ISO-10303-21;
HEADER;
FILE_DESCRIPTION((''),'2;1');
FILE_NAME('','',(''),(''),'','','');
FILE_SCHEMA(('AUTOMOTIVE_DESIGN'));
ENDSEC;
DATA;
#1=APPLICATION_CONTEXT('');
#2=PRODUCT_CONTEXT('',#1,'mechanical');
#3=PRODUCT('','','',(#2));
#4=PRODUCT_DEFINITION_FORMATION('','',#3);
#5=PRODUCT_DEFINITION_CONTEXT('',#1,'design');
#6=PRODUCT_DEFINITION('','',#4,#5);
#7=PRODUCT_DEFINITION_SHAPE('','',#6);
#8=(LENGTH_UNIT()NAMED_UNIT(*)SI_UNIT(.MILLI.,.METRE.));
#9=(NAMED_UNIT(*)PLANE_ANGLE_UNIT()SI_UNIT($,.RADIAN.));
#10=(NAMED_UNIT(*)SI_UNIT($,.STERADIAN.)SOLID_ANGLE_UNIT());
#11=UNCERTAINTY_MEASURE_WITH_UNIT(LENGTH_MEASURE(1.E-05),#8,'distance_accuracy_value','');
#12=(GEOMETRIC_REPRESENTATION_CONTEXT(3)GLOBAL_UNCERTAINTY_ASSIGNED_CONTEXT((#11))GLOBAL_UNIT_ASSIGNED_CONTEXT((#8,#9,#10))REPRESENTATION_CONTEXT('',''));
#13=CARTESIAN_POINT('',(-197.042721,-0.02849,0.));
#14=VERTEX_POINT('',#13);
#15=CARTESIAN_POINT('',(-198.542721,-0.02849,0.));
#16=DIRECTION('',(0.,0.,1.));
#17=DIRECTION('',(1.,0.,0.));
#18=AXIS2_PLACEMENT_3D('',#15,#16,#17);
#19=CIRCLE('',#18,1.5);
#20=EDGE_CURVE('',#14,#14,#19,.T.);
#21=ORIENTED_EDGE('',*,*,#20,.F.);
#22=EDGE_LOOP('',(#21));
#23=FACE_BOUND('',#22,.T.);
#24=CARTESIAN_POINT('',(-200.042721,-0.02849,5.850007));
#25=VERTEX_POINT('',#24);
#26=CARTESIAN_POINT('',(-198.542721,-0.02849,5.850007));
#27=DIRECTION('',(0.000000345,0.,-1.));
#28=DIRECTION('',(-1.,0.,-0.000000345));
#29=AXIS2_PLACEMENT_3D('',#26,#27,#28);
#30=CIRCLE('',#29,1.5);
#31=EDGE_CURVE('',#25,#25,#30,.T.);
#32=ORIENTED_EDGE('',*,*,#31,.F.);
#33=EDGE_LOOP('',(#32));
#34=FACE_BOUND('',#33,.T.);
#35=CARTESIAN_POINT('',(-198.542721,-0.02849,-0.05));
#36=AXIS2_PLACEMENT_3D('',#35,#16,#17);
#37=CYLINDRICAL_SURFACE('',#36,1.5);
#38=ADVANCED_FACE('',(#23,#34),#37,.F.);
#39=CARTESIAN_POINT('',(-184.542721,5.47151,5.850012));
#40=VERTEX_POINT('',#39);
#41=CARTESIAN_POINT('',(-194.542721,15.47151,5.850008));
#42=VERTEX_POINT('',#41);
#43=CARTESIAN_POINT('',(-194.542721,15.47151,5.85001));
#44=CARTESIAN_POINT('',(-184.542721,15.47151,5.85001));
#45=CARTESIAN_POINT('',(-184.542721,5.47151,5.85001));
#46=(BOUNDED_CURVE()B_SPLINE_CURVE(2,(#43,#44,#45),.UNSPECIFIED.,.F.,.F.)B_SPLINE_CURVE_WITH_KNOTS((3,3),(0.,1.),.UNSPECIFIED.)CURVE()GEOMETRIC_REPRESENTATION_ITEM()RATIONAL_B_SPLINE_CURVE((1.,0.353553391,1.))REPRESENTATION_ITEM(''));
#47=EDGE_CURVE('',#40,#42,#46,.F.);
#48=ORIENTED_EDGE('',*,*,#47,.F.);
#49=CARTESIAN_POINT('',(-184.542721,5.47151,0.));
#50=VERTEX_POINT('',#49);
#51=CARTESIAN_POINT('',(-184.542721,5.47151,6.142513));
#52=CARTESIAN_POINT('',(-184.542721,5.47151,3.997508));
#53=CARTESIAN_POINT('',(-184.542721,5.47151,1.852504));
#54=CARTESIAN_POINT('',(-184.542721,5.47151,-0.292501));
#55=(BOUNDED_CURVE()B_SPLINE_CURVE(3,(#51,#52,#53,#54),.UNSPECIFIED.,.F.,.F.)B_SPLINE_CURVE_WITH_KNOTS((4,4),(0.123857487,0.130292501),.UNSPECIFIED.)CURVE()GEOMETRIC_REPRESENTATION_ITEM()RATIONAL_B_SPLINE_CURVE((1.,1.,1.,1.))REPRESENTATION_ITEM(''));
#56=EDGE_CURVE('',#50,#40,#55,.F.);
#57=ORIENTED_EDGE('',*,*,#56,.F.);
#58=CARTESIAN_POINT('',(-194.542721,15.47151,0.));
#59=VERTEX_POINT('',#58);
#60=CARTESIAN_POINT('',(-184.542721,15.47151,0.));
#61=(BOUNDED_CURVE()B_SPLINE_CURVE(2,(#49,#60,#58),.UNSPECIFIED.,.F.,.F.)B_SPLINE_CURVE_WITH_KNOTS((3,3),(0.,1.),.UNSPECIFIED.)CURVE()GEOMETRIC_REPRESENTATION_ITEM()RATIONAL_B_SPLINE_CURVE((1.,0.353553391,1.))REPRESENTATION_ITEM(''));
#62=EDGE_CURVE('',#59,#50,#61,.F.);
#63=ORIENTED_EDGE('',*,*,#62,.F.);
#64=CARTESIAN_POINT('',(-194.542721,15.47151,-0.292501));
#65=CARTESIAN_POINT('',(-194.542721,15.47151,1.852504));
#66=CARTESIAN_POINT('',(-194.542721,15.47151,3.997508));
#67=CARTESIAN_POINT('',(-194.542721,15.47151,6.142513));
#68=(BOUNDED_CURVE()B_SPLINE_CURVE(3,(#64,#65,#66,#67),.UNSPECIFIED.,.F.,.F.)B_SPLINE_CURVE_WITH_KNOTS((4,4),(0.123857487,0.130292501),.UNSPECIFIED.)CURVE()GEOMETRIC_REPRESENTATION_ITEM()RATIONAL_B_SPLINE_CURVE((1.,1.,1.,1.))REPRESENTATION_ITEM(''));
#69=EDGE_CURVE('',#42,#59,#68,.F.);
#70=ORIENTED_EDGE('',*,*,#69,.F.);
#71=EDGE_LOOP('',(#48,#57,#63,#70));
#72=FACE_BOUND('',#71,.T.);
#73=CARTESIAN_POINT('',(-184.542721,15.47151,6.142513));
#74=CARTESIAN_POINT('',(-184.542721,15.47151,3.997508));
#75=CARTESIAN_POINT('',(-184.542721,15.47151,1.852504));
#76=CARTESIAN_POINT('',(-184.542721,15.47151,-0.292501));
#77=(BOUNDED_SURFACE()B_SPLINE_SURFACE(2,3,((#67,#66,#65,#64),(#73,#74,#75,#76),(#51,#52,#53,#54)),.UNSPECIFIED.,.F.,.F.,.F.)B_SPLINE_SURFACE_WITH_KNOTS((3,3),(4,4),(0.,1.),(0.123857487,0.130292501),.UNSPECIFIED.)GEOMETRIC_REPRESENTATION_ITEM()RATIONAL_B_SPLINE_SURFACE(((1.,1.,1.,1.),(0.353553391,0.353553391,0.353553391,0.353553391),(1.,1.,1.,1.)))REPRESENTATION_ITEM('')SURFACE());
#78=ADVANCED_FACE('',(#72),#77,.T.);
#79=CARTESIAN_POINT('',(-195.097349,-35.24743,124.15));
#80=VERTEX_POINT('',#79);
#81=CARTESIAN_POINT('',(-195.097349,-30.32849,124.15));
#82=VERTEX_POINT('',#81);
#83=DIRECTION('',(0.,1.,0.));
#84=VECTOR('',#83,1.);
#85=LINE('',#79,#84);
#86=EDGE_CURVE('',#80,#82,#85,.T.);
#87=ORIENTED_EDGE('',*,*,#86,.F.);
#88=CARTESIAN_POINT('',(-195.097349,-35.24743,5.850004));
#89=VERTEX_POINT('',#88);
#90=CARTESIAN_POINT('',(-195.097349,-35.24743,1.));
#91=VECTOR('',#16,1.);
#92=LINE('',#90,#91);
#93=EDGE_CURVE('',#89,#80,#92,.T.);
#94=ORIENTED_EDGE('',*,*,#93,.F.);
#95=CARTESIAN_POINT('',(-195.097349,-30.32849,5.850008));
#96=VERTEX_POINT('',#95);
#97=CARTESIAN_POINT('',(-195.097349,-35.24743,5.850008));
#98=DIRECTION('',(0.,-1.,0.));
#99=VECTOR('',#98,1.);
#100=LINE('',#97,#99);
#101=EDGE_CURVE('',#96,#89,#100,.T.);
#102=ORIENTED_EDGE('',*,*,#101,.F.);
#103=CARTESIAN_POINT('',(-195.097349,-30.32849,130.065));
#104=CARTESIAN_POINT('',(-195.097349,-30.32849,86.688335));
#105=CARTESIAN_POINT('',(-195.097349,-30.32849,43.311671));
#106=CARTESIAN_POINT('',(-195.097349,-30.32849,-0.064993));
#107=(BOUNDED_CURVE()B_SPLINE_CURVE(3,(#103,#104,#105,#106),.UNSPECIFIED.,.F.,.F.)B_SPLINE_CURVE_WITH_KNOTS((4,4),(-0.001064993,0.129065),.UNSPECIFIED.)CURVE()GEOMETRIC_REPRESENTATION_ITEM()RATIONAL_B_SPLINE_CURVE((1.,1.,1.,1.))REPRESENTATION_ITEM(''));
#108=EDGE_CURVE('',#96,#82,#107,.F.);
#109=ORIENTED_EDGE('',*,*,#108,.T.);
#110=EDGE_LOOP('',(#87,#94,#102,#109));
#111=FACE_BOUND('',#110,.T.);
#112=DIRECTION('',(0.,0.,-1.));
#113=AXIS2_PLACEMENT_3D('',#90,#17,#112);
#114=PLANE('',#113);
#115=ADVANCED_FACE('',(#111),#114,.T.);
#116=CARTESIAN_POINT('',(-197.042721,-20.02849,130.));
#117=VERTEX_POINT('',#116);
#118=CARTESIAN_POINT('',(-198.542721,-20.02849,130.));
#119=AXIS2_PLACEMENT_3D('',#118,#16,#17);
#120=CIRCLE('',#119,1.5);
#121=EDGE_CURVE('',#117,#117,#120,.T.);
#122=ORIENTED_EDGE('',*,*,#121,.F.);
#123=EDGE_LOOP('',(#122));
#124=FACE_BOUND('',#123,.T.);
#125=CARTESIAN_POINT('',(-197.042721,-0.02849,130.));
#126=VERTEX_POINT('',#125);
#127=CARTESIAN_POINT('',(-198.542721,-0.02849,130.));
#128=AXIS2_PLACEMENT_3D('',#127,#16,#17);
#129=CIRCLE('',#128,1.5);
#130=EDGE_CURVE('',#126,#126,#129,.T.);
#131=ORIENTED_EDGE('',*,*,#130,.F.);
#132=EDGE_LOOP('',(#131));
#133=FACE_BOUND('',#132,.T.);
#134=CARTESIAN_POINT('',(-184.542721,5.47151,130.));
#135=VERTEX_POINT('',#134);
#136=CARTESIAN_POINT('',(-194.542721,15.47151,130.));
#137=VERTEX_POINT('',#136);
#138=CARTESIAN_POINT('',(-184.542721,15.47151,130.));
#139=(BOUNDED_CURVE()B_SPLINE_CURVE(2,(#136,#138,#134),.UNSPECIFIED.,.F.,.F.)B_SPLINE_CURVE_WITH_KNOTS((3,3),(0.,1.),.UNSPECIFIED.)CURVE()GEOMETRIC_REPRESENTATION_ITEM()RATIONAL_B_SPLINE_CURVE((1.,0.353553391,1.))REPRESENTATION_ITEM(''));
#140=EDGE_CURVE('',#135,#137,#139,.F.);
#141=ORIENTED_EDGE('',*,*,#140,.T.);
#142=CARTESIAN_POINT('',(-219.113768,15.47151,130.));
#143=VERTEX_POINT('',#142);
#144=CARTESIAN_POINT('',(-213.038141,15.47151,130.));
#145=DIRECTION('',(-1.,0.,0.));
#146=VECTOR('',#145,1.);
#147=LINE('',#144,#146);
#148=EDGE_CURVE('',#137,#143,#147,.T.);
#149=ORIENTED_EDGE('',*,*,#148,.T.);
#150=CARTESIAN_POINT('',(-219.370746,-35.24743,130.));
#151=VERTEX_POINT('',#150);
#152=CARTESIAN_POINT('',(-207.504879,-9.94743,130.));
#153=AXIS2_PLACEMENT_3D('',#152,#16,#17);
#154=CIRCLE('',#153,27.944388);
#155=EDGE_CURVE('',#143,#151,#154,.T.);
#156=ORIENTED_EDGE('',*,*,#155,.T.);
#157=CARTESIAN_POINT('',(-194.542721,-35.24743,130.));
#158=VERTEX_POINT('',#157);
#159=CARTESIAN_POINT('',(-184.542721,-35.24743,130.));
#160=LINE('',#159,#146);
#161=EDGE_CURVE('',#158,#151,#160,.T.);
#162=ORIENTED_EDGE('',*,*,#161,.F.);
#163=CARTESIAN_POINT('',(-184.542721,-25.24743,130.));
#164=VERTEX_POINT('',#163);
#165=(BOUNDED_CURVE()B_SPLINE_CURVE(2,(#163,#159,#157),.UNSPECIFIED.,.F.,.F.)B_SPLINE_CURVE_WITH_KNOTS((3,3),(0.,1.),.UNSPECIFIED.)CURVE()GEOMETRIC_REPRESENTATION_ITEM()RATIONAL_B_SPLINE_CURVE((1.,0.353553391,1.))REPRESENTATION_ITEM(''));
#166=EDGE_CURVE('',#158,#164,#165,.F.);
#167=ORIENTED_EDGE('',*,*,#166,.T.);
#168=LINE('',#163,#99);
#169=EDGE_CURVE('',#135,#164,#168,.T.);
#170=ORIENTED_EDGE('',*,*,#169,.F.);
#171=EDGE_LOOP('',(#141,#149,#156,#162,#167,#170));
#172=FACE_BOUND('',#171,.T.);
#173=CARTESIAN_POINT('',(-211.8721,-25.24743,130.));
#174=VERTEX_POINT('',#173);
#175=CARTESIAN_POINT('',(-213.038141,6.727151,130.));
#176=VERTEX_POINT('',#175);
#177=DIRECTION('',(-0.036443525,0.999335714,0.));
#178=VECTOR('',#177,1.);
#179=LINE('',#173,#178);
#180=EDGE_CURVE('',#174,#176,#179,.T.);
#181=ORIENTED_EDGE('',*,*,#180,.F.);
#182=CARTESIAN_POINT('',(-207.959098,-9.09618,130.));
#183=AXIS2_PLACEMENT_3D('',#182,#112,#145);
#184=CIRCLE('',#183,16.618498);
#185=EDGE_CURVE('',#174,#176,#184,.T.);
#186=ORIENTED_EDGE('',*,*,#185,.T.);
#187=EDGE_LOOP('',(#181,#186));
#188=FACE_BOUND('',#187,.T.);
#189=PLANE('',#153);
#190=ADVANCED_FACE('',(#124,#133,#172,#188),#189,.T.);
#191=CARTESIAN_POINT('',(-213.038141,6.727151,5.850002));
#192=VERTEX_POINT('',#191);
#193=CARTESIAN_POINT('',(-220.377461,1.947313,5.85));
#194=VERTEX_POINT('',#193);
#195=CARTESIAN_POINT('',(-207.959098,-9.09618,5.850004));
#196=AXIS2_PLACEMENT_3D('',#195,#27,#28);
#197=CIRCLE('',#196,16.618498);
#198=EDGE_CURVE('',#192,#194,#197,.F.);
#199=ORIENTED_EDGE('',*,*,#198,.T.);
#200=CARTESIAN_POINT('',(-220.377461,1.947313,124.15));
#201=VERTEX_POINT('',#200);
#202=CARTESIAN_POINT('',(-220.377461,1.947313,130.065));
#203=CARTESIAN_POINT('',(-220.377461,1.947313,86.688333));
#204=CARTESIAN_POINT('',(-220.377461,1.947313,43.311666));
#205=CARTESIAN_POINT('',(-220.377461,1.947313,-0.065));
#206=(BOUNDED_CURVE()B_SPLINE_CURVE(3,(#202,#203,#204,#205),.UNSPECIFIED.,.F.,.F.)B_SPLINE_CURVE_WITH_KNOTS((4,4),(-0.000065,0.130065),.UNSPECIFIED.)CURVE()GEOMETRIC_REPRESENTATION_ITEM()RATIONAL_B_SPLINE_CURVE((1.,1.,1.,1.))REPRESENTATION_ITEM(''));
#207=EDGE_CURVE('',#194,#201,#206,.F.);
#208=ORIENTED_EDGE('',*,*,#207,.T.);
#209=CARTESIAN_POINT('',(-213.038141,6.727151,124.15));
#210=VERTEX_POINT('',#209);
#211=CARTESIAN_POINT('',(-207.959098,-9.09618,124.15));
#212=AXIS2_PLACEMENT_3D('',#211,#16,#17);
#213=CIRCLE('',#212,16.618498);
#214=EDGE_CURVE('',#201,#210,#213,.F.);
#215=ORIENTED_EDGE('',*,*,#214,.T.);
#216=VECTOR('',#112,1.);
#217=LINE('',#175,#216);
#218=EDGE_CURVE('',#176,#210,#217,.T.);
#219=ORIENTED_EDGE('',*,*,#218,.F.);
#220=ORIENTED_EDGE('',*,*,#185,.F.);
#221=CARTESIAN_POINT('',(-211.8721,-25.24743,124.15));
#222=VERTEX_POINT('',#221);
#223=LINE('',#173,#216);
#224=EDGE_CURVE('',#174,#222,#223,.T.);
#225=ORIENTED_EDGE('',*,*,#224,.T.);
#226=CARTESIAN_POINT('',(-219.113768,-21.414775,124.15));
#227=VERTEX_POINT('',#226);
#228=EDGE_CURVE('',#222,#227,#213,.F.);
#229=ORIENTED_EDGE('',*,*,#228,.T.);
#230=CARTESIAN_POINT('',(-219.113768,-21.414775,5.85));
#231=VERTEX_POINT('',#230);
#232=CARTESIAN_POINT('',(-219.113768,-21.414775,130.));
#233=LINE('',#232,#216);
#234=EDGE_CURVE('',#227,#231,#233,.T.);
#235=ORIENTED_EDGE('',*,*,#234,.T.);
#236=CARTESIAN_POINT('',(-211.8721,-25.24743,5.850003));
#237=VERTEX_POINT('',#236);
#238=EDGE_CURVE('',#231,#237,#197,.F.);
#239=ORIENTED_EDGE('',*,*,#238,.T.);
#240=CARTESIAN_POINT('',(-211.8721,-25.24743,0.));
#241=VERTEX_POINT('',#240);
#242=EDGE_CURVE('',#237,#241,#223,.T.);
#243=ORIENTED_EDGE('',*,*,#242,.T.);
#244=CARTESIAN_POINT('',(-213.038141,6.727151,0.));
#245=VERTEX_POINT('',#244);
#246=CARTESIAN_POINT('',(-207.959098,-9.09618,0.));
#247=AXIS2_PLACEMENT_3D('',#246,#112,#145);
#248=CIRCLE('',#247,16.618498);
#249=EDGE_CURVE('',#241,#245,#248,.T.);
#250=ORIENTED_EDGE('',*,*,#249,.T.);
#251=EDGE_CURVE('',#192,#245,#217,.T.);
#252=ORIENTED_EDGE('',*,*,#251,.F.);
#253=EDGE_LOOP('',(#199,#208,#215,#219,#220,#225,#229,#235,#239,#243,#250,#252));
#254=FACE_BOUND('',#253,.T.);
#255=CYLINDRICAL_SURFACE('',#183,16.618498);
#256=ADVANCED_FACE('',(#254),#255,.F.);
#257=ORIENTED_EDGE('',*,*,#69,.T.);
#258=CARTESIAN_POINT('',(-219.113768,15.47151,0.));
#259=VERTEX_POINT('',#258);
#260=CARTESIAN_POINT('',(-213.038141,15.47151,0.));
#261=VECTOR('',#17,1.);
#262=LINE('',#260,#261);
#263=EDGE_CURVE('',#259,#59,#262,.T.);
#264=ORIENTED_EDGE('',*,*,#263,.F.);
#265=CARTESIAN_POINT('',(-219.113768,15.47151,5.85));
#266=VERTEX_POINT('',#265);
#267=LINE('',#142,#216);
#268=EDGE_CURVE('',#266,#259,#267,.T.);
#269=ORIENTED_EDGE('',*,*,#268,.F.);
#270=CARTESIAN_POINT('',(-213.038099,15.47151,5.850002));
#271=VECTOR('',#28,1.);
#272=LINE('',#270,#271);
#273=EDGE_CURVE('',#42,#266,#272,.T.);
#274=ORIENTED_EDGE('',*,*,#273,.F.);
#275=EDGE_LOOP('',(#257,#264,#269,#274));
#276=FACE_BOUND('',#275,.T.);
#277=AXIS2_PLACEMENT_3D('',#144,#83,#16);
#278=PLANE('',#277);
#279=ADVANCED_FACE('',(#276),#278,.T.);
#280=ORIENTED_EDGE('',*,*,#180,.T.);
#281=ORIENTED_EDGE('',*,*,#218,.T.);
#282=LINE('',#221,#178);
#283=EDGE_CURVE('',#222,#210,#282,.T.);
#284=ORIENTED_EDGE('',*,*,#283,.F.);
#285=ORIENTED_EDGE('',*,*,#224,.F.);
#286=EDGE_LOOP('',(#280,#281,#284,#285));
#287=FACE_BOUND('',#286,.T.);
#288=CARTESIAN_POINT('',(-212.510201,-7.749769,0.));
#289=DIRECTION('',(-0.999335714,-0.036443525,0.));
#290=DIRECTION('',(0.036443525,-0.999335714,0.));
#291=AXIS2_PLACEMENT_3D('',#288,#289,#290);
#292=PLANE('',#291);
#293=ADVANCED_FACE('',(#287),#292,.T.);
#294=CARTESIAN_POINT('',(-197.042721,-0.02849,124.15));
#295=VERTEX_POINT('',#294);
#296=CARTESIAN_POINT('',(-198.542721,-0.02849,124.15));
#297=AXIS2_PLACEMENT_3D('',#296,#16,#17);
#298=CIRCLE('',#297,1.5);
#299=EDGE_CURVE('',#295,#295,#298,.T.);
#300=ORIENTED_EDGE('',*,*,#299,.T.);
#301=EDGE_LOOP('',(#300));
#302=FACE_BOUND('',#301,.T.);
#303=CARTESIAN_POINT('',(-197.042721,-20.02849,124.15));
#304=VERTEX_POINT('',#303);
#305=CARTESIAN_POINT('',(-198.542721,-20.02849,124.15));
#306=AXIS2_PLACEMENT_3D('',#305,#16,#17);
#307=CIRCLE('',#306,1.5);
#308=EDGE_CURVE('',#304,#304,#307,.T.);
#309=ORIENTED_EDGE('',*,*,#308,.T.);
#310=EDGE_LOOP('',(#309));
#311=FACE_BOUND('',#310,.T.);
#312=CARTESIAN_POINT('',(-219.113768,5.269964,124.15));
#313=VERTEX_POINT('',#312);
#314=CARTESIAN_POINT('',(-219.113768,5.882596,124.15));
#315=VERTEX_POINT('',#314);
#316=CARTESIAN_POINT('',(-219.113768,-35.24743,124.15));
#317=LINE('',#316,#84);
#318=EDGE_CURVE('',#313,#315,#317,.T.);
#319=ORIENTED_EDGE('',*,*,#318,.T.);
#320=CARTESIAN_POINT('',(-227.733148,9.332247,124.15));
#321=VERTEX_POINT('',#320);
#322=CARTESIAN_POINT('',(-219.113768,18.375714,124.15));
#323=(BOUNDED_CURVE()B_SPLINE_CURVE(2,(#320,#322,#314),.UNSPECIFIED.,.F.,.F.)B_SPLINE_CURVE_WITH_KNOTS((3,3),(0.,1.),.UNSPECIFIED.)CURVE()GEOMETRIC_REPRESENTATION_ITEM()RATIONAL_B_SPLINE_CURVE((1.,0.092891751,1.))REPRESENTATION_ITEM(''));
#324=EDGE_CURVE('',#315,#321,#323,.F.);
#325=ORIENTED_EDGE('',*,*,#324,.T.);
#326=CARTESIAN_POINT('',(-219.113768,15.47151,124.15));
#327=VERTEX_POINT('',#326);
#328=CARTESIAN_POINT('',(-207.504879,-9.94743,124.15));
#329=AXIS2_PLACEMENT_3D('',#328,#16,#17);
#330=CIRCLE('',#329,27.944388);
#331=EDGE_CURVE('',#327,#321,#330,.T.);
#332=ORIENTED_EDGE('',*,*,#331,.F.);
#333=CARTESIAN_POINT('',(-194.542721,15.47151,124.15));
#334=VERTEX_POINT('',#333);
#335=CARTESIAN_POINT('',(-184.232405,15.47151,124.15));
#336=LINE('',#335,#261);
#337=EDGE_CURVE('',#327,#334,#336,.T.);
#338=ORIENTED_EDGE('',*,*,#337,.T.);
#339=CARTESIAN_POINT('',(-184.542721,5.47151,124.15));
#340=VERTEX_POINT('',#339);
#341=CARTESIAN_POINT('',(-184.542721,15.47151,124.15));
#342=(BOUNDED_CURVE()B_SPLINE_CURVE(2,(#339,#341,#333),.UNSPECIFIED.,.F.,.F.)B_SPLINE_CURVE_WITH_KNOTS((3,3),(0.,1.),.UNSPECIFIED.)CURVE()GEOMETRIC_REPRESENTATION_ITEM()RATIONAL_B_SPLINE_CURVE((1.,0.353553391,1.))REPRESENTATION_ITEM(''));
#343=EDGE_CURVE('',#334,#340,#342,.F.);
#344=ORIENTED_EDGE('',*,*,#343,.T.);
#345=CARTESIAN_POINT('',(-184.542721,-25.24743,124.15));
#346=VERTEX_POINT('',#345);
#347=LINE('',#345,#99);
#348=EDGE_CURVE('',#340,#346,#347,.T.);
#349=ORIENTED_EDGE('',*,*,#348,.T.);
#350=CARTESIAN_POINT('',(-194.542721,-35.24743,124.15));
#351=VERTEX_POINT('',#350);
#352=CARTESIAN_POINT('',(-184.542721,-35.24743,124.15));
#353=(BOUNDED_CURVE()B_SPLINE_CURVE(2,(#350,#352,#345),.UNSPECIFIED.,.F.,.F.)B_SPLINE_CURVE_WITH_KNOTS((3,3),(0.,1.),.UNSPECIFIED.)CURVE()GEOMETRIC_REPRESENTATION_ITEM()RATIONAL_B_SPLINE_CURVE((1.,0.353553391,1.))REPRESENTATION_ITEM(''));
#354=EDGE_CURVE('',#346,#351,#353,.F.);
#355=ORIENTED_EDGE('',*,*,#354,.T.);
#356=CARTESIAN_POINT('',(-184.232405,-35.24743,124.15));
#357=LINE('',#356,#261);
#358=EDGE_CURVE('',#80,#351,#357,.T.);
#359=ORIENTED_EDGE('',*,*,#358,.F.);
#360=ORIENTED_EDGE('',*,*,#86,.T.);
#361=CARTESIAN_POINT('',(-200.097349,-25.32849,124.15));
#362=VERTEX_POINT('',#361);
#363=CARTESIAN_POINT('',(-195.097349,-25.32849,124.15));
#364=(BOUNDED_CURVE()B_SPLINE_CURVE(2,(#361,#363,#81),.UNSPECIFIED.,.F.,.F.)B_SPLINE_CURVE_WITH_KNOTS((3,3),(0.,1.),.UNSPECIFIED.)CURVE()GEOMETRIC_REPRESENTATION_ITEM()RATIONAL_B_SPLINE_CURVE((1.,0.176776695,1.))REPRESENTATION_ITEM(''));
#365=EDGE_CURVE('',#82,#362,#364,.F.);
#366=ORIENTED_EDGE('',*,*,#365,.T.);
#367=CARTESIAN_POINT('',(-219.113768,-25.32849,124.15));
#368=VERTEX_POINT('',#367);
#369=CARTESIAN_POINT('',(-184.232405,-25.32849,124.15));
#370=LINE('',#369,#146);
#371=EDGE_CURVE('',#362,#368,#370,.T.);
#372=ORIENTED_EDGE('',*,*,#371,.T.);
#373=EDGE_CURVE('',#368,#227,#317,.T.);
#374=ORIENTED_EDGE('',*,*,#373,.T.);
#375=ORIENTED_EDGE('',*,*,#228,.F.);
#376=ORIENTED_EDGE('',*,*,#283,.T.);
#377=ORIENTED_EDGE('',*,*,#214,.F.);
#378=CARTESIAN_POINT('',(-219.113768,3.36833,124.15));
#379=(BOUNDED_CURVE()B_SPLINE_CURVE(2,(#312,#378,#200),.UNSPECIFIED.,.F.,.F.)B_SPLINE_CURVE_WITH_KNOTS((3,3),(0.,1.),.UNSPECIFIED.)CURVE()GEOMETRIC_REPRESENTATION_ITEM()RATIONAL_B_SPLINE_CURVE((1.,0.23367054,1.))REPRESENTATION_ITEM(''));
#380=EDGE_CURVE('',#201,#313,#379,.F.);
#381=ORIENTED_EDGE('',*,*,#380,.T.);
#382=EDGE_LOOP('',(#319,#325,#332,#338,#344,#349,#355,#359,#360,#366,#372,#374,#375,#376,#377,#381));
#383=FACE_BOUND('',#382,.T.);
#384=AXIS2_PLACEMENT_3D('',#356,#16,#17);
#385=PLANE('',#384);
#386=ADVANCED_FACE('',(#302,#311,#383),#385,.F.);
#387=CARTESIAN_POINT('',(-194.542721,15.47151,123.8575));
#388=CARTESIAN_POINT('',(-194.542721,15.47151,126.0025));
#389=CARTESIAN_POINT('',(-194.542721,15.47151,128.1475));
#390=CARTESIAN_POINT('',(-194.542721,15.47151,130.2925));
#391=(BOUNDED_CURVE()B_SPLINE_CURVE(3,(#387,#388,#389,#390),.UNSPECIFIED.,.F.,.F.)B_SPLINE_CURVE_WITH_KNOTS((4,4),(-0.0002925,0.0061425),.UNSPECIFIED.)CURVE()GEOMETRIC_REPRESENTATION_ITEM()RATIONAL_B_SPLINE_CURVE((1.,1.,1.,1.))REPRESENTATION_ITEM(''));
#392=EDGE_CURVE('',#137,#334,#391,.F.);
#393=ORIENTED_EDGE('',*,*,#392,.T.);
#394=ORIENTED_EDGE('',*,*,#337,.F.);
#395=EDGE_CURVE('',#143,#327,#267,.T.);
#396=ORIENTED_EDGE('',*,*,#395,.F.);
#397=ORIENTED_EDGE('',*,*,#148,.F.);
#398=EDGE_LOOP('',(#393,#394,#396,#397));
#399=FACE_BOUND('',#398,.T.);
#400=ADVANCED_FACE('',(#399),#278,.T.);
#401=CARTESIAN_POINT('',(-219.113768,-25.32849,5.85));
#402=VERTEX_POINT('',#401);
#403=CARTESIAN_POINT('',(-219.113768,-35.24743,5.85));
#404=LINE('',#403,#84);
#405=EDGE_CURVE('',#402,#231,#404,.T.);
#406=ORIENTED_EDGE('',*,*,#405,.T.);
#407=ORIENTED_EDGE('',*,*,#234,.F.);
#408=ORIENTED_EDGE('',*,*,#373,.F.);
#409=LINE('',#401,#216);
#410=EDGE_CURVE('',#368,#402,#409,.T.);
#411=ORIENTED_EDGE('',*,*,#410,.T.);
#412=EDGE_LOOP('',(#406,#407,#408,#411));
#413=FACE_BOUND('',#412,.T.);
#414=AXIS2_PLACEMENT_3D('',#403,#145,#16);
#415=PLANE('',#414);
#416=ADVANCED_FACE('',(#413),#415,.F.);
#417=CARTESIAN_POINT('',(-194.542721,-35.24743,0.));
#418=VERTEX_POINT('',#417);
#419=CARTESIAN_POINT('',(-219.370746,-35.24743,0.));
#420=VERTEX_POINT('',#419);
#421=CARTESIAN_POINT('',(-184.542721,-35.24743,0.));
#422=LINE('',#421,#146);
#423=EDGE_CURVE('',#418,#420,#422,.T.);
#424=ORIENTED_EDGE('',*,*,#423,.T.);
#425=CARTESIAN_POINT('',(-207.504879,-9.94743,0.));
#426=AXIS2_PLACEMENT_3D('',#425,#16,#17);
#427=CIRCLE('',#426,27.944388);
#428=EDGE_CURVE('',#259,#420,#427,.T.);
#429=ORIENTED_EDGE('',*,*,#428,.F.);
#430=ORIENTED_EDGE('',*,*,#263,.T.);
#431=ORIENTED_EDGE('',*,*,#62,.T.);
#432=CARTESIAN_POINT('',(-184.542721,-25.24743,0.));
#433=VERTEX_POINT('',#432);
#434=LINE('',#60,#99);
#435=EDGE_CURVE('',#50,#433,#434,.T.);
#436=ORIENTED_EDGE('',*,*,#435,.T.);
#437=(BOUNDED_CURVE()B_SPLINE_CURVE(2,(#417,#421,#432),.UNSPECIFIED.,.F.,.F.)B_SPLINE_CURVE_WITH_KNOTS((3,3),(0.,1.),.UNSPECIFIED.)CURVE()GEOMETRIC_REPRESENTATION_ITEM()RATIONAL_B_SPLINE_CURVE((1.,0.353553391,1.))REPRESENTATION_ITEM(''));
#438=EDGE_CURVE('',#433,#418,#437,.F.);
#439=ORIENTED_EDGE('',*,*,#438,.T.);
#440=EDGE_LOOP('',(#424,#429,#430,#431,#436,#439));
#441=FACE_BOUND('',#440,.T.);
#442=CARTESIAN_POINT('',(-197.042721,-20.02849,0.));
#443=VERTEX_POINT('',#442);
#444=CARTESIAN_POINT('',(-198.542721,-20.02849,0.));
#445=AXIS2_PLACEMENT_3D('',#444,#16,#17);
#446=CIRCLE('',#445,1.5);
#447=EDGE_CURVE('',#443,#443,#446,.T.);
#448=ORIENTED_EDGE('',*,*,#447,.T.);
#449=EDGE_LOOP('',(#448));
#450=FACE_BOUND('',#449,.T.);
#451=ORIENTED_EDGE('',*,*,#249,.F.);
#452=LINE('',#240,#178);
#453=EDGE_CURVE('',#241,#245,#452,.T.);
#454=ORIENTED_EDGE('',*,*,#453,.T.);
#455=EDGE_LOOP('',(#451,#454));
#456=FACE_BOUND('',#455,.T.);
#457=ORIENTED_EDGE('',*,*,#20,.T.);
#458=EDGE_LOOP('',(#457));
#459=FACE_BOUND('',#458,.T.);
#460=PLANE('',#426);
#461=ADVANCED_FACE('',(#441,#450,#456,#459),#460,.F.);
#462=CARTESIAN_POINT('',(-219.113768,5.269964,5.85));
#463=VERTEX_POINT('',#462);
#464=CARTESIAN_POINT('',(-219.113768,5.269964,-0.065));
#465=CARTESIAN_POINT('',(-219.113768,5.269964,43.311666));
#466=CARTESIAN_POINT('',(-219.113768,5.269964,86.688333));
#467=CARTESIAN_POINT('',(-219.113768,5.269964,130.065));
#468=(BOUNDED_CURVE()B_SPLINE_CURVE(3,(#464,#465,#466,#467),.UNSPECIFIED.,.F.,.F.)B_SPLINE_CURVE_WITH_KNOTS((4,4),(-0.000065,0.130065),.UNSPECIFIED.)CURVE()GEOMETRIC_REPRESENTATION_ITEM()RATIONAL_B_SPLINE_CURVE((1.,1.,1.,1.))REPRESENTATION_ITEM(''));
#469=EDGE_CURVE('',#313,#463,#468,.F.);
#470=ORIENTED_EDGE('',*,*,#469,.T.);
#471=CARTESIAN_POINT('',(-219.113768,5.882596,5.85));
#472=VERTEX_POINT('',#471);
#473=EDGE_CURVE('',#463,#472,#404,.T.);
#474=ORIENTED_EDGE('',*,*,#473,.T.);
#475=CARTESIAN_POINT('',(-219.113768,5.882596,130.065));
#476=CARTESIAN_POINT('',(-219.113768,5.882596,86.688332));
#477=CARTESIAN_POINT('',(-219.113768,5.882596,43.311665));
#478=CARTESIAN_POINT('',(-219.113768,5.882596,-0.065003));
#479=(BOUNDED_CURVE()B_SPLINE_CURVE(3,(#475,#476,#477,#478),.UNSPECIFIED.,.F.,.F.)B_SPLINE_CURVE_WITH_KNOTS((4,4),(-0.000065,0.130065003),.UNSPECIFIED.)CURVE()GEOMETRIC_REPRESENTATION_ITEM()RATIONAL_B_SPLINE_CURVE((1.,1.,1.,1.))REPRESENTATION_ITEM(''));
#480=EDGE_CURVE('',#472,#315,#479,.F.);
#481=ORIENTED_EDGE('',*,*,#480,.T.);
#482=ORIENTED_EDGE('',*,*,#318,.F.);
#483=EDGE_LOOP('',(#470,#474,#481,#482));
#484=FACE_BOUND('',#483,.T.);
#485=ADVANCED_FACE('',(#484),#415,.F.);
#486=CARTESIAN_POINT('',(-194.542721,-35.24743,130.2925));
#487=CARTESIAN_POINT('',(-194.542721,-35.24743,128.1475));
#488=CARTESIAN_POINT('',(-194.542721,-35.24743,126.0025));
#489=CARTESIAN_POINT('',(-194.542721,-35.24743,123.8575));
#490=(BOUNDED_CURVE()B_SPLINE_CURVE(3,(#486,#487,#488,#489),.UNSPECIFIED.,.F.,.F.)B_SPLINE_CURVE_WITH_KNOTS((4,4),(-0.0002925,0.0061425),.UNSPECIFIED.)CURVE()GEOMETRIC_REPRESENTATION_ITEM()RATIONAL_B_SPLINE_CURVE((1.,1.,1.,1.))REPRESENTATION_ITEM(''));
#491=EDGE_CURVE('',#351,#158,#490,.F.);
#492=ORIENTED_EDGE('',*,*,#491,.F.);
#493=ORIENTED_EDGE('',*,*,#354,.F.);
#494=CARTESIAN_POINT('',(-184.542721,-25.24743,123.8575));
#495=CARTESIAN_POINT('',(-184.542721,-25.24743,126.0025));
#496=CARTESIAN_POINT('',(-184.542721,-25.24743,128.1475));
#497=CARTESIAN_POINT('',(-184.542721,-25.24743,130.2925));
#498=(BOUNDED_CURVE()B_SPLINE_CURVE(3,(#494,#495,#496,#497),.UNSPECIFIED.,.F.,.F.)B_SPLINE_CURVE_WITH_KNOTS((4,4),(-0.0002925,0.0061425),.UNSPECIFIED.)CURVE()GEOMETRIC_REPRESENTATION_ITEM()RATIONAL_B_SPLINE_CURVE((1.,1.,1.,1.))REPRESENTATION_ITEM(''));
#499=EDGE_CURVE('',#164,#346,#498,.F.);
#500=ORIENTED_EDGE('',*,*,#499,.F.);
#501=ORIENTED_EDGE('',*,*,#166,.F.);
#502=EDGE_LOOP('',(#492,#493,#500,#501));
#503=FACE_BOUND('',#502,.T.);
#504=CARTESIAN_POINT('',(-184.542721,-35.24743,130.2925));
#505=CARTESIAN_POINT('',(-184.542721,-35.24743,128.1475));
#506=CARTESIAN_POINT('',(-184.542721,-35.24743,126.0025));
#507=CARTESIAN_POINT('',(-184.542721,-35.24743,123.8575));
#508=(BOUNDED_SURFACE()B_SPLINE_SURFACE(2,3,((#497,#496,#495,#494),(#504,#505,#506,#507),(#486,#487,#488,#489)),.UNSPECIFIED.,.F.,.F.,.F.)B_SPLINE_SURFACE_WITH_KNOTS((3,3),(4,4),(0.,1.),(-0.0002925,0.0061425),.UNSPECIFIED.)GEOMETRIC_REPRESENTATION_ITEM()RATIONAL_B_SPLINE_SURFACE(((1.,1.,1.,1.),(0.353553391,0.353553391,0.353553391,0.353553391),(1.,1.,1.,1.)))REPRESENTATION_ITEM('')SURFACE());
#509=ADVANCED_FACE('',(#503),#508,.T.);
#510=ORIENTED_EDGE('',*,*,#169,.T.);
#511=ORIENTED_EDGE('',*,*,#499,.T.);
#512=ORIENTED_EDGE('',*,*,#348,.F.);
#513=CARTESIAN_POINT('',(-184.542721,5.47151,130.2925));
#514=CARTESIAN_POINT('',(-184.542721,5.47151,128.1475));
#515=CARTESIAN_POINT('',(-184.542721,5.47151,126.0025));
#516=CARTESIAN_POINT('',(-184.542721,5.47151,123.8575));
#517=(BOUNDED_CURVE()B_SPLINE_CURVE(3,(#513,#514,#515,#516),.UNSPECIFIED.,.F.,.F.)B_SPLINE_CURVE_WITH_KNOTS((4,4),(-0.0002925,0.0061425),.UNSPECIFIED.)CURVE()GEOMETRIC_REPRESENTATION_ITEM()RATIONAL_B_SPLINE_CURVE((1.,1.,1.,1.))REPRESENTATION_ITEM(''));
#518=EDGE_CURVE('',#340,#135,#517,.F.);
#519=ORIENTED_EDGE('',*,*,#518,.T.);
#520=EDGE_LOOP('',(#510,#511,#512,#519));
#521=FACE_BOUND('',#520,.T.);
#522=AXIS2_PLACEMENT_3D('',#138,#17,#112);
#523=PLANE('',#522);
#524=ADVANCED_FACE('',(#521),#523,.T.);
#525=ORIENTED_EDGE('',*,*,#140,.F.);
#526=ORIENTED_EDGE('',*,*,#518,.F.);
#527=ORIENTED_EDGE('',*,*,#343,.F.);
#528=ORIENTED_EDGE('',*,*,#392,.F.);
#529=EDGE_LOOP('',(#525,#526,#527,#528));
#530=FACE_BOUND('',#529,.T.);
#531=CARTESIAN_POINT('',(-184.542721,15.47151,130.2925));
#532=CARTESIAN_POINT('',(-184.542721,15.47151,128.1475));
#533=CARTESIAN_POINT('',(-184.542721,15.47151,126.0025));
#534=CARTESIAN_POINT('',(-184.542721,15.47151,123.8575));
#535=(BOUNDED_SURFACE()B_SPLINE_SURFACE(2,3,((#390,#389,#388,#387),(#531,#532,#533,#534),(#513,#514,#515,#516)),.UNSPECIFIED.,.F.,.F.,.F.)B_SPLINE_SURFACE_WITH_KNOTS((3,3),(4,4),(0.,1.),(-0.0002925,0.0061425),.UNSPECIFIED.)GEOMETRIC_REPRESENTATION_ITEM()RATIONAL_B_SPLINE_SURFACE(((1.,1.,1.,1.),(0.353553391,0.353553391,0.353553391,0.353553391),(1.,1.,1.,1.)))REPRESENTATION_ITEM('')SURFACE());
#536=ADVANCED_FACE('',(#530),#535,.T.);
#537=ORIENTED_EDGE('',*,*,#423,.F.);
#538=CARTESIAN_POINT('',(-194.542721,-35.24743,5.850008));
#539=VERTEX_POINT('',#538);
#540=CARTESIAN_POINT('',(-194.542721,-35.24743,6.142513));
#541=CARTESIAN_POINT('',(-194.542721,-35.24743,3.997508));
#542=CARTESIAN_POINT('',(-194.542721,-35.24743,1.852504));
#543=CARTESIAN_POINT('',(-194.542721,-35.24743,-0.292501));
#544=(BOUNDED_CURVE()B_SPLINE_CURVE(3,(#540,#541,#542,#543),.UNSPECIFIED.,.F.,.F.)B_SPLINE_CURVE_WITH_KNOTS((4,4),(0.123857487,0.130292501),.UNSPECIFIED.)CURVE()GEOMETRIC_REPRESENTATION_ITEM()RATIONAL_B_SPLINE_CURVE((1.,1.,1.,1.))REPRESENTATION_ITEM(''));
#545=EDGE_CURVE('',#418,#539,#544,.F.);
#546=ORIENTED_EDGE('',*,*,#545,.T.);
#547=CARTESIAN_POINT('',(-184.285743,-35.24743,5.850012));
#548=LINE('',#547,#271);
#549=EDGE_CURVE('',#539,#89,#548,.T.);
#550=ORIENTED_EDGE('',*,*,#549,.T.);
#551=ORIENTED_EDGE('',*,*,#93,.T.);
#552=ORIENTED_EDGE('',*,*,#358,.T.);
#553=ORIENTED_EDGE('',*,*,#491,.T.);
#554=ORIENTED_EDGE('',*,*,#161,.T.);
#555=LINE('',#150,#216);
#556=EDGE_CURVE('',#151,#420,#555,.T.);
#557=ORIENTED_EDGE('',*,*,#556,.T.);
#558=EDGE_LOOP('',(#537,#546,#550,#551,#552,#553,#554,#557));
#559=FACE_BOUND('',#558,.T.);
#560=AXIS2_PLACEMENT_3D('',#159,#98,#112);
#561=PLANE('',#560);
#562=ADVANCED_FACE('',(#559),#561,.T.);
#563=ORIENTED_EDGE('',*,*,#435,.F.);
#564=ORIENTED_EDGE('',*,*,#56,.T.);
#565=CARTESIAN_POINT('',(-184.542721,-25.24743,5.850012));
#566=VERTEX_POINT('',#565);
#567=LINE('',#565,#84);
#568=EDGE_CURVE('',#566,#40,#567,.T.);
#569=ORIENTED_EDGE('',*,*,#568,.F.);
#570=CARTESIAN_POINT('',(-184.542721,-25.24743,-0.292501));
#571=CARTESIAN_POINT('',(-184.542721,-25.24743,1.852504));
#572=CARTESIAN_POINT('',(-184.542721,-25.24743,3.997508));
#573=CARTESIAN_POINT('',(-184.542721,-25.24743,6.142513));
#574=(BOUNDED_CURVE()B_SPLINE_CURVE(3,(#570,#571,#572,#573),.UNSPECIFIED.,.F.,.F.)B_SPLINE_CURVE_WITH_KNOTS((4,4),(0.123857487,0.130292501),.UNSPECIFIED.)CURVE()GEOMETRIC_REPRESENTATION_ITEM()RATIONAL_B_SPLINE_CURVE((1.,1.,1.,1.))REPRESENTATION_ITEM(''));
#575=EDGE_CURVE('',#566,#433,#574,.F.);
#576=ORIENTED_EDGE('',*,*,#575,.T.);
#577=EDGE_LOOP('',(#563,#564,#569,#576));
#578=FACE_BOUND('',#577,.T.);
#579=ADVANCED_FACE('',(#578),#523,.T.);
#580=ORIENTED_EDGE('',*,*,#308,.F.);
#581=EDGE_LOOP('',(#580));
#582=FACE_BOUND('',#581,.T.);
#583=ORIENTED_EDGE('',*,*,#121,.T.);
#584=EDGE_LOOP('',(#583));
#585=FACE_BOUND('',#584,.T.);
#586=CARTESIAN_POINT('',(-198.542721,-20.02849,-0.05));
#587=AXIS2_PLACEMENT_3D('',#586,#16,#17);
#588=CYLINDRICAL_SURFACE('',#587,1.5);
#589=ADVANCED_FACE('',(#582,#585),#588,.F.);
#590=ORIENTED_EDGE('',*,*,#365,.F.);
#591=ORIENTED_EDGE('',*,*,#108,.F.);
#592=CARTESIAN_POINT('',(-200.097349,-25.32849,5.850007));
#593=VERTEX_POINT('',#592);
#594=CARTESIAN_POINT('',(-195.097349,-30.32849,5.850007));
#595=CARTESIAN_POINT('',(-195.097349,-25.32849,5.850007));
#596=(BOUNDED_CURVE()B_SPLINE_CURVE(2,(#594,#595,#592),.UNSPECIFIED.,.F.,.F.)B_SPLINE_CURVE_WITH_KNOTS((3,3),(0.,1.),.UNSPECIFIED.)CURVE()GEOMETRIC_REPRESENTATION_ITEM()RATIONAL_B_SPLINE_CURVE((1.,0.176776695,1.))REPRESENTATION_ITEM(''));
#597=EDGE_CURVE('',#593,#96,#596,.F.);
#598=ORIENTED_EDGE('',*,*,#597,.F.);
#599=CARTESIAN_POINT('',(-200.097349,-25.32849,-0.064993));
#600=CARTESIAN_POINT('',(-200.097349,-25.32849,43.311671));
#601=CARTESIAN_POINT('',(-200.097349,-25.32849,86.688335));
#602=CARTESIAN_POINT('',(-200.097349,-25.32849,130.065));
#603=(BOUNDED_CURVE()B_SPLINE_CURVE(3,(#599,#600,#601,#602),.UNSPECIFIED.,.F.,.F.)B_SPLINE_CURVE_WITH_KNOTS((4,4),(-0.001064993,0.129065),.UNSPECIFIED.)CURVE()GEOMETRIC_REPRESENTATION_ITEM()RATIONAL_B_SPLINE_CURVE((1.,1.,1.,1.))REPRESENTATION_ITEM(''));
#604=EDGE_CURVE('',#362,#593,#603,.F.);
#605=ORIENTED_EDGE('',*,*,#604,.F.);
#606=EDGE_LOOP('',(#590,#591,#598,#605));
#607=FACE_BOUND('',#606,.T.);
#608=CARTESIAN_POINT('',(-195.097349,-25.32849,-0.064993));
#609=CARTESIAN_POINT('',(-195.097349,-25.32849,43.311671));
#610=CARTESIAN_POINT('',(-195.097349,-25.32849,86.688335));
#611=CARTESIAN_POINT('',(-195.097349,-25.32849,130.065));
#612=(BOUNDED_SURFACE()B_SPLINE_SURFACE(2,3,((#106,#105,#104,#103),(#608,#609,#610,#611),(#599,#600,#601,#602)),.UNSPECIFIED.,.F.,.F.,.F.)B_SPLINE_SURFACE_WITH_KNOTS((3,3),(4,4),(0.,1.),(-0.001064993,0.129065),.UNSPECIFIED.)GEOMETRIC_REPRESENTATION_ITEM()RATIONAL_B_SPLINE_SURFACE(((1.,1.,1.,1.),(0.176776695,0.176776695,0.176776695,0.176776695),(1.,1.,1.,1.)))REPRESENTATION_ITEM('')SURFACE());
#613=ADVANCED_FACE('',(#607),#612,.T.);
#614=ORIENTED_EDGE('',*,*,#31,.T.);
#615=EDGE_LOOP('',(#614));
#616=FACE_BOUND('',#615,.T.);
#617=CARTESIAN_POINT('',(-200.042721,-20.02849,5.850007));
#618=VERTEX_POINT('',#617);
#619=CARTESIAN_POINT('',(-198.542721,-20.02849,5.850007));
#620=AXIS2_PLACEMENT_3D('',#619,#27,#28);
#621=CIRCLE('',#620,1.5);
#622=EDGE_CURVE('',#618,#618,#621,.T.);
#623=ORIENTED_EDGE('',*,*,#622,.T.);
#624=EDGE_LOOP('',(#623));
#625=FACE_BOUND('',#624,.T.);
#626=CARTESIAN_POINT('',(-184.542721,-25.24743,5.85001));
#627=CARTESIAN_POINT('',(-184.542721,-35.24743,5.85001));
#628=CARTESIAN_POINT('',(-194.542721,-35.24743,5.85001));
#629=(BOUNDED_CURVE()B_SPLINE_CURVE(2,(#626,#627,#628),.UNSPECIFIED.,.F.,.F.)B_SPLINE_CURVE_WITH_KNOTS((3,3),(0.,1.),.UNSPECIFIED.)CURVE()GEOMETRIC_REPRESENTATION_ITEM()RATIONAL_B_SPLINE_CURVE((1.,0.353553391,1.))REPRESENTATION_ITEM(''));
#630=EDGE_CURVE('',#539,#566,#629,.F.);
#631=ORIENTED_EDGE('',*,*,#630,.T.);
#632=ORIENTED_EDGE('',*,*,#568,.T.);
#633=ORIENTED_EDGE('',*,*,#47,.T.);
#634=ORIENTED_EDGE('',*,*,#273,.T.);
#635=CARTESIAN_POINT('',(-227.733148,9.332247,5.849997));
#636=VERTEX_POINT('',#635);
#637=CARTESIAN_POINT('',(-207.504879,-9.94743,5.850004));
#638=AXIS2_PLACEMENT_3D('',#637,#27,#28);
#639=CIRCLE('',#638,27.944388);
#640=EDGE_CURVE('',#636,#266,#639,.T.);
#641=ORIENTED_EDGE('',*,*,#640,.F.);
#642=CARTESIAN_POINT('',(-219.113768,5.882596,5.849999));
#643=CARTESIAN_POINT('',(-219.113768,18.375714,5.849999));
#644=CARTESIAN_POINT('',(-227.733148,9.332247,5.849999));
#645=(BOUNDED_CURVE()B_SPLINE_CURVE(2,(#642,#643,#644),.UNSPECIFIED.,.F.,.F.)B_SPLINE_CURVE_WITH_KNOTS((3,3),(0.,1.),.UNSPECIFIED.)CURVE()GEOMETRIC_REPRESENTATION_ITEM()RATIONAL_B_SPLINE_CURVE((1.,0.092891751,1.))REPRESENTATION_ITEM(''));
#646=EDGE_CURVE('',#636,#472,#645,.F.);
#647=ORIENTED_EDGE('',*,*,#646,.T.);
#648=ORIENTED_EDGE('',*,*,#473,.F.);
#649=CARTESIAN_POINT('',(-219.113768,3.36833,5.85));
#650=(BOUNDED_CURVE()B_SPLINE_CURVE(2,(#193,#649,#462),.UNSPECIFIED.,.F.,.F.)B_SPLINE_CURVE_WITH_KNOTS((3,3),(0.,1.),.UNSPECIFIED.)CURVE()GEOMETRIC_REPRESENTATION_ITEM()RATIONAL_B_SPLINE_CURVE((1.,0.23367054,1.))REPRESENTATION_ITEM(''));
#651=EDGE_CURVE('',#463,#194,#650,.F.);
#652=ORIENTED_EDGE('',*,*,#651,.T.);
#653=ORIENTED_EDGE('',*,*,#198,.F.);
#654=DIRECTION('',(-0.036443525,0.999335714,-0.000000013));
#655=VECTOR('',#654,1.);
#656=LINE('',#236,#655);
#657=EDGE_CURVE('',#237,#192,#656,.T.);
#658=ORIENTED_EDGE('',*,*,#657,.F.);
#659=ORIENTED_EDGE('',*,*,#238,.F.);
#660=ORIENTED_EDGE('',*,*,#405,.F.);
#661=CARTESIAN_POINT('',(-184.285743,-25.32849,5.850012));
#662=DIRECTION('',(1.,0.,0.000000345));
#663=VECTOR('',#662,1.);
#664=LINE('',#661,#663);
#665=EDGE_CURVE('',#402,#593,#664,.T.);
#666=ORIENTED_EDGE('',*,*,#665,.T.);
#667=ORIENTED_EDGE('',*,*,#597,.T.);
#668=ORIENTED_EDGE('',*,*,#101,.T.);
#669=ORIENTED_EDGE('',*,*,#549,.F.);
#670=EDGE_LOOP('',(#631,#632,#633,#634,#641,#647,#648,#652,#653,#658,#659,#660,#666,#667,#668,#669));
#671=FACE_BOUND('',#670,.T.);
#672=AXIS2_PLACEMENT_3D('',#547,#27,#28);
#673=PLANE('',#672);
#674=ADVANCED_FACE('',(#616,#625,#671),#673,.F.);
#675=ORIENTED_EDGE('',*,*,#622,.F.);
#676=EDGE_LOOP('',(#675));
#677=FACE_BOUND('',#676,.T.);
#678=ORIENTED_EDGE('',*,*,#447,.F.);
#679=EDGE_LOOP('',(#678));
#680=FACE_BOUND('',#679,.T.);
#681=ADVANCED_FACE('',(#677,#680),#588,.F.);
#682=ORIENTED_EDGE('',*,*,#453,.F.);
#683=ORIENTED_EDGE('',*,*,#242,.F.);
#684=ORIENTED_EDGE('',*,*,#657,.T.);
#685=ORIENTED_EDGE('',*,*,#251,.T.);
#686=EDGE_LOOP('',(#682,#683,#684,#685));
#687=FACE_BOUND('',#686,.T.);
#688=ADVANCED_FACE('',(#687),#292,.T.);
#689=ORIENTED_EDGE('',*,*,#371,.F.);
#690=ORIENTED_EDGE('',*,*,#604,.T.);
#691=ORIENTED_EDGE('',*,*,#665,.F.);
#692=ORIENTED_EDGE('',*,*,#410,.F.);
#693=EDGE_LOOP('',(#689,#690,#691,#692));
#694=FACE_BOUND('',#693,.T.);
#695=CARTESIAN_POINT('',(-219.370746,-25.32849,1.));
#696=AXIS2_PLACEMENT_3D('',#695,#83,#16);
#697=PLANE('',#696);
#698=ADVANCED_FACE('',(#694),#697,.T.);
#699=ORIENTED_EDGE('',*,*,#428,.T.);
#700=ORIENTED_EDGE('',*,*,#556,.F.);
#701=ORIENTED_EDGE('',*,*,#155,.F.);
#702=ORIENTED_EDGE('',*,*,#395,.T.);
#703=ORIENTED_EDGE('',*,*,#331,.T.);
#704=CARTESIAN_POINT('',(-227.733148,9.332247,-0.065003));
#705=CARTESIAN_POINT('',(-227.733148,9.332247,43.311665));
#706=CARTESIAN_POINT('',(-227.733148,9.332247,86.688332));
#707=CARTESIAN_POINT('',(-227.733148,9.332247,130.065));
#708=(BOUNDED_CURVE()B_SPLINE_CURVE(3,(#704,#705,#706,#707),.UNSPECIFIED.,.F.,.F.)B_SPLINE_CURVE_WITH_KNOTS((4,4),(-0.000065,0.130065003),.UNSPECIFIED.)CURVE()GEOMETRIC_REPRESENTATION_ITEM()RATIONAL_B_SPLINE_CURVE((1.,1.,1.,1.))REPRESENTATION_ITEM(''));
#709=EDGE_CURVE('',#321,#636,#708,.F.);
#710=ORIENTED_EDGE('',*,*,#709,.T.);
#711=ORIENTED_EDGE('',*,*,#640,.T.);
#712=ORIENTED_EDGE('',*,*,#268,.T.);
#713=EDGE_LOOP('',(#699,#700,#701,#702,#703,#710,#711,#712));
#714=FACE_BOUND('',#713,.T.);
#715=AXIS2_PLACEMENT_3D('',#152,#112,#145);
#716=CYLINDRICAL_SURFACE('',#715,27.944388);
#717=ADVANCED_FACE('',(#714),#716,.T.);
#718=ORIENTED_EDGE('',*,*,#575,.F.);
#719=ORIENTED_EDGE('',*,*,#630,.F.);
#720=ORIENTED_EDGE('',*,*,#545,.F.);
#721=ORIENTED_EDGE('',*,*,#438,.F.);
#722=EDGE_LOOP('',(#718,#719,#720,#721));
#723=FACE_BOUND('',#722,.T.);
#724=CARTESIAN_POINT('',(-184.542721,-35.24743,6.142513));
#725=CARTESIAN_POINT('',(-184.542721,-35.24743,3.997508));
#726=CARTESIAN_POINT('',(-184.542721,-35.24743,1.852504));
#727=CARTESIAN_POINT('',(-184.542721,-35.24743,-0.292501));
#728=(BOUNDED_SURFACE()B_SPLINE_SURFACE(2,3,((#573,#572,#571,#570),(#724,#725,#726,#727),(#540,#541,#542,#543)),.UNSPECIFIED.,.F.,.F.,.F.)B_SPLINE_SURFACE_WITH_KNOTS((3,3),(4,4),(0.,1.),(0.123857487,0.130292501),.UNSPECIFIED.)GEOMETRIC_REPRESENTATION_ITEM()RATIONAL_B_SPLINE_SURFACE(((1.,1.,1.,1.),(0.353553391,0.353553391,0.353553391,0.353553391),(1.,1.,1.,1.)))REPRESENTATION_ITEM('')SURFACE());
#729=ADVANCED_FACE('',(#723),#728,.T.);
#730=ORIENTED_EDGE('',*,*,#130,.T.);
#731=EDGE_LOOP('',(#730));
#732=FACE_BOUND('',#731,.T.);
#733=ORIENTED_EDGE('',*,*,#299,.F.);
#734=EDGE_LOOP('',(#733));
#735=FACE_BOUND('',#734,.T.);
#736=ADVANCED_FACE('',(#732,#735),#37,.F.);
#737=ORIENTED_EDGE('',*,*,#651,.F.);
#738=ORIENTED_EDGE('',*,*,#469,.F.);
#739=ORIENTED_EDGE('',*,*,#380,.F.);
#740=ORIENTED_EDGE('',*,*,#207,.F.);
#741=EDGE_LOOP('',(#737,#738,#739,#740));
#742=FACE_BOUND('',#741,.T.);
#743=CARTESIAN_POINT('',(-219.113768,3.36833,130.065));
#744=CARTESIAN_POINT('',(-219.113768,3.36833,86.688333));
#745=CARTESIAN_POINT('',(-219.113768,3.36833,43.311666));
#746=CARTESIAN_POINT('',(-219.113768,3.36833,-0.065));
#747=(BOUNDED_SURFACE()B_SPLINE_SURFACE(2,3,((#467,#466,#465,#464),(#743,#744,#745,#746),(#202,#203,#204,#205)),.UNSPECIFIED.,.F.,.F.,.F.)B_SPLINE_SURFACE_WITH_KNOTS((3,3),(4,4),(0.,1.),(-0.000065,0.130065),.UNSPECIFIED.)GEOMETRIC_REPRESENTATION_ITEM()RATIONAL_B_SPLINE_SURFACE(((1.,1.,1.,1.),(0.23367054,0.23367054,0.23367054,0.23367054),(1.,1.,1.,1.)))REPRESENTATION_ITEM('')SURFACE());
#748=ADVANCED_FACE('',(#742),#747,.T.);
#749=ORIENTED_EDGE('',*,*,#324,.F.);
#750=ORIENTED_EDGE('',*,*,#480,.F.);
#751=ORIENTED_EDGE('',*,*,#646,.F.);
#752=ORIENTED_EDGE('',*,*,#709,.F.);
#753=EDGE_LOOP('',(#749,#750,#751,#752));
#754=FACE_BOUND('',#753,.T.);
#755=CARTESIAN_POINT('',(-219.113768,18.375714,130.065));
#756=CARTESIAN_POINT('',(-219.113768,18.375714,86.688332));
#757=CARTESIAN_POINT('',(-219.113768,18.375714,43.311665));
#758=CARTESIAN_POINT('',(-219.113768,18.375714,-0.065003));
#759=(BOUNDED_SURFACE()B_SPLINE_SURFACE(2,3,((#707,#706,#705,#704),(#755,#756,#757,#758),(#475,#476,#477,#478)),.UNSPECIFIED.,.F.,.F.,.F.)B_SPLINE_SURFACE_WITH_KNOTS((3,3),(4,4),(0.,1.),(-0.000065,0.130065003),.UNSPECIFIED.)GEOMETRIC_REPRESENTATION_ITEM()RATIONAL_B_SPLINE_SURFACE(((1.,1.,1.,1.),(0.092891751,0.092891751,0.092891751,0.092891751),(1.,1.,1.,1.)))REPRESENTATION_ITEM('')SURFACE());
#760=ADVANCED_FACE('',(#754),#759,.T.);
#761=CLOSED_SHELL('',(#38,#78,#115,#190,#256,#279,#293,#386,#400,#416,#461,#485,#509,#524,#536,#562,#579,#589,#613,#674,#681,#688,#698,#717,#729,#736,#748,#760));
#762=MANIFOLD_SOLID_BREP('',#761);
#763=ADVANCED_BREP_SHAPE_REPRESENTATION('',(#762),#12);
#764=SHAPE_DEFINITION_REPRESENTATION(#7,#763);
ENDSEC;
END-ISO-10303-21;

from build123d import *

# Parameters (mm, degrees)
BOSS_EXTRUDE1_DEPTH     = 130
CUT_EXTRUDE3_DEPTH      = 273.019096875
CUT_EXTRUDE3_DEPTH_BACK = 273.019096875
FILLET2_SIZE            = 10
CUT_EXTRUDE4_DEPTH      = 272.254010875
CUT_EXTRUDE4_DEPTH_BACK = 272.254010875
SKETCH8_R               = 1.5
SKETCH9_W               = 24.273397223
SKETCH9_H               = 9.918939499
BOSS_EXTRUDE5_DEPTH     = 129
FILLET5_SIZE            = 5


with BuildPart() as part:
    # Sketch1 → Boss-Extrude1 (new body)
    with BuildSketch(Plane.XY):
        with BuildLine():
            Line((-213.038141425, 15.471509733), (-219.113768434, 15.471509733))
            ThreePointArc((-219.113768434, 15.471509733), (-235.448907683, -9.805845818), (-219.370745969, -35.247429766))
            Line((-219.370745969, -35.247429766), (-184.542720563, -35.247429766))
            Line((-184.542720563, -35.247429766), (-184.542720563, -25.247429766))
            Line((-184.542720563, -25.247429766), (-211.872100418, -25.247429766))
            ThreePointArc((-211.872100418, -25.247429766), (-224.566556185, -9.701816168), (-213.038141425, 6.727151008))
            Line((-213.038141425, 6.727151008), (-184.542720563, 6.727151008))
            Line((-184.542720563, 6.727151008), (-184.542720563, 15.471509733))
            Line((-184.542720563, 15.471509733), (-213.038141425, 15.471509733))
        make_face()
    extrude(amount=BOSS_EXTRUDE1_DEPTH)

    # Sketch6 → Cut-Extrude3 (cut, two sides: drawn at the far end of the back side and taken through both)
    with BuildSketch(Plane(origin=(0, -25.247429766, 0), x_dir=(1, 0, 0), z_dir=(0, 1, 0)).offset(-CUT_EXTRUDE3_DEPTH_BACK)):
        Polygon((-184.285743028, -5.850012024), (-219.113768434, -5.85), (-219.113768434, -124.15), (-184.232404978, -124.15), align=None)
    extrude(amount=CUT_EXTRUDE3_DEPTH + CUT_EXTRUDE3_DEPTH_BACK, mode=Mode.SUBTRACT)

    # loft from a face of the part (loft4)
    loft([part.faces().sort_by_distance((-198.20741049, -25.247429766, 127.075))[0], part.faces().sort_by_distance((-198.790430994, 6.727151008, 127.075))[0]])

    # loft from a face of the part (loft5)
    loft([part.faces().sort_by_distance((-198.207406817, -25.247429766, 2.925003609))[0], part.faces().sort_by_distance((-198.790427001, 6.727151008, 2.925003508))[0]])

    # Fillet2
    # a fillet whose section is not a circle: 10 mm, written as the material it takes off along each edge
    with BuildSketch(Plane(origin=(-184.542720563, 15.471509733, 99.15), x_dir=(0, -1, 0), z_dir=(0, 0, 1))) as fillet2_piece_1:
        with BuildLine():
            Bezier((FILLET2_SIZE, 0), (0, 0), (0, -FILLET2_SIZE), weights=[1, 0.353553391, 1])
            Line((0, -FILLET2_SIZE), (0, 0))
            Line((0, 0), (FILLET2_SIZE, 0))
        make_face()
    extrude(amount=55.85, mode=Mode.SUBTRACT)
    with BuildSketch(Plane(origin=(-184.542720563, -35.247429766, 99.15), x_dir=(0, 1, 0), z_dir=(0, 0, 1))) as fillet2_piece_2:
        with BuildLine():
            Bezier((FILLET2_SIZE, 0), (0, 0), (0, FILLET2_SIZE), weights=[1, 0.353553391, 1])
            Line((0, FILLET2_SIZE), (0, 0))
            Line((0, 0), (FILLET2_SIZE, 0))
        make_face()
    extrude(amount=55.85, mode=Mode.SUBTRACT)
    with BuildSketch(Plane(origin=(-184.542720563, 15.471509733, -25), x_dir=(-1, 0, 0), z_dir=(0, 0, 1))) as fillet2_piece_3:
        with BuildLine():
            Bezier((FILLET2_SIZE, 0), (0, 0), (0, FILLET2_SIZE), weights=[1, 0.353553391, 1])
            Line((0, FILLET2_SIZE), (0, 0))
            Line((0, 0), (FILLET2_SIZE, 0))
        make_face()
    extrude(amount=55.850011936, mode=Mode.SUBTRACT)
    with BuildSketch(Plane(origin=(-184.542720563, -35.247429766, -25), x_dir=(-1, 0, 0), z_dir=(0, 0, 1))) as fillet2_piece_4:
        with BuildLine():
            Bezier((FILLET2_SIZE, 0), (0, 0), (0, -FILLET2_SIZE), weights=[1, 0.353553391, 1])
            Line((0, -FILLET2_SIZE), (0, 0))
            Line((0, 0), (FILLET2_SIZE, 0))
        make_face()
    extrude(amount=55.850011936, mode=Mode.SUBTRACT)

    # Sketch8 → Cut-Extrude4 (cut, two sides: drawn at the far end of the back side and taken through both)
    with BuildSketch(Plane.XY.offset(130).offset(-CUT_EXTRUDE4_DEPTH_BACK)):
        with Locations((-198.542720563, -0.028490267)):
            Circle(SKETCH8_R)
        with Locations((-198.542720563, -20.028490267)):
            Circle(SKETCH8_R)
    extrude(amount=CUT_EXTRUDE4_DEPTH + CUT_EXTRUDE4_DEPTH_BACK, mode=Mode.SUBTRACT)

    # Sketch9 → Boss-Extrude5 (add)
    with BuildSketch(Plane.XY.offset(130)):
        with Locations((-207.234047358, -30.287960017)):
            Rectangle(SKETCH9_W, SKETCH9_H)
    extrude(amount=-BOSS_EXTRUDE5_DEPTH)

    # Fillet5
    # a fillet whose section is not a circle: 5 mm, written as the material it takes off along each edge
    with BuildSketch(Plane(origin=(-219.113768434, 3.222415949, 124.15), x_dir=(-0.7039216353317727, -0.7102776438209518, 0), z_dir=(0, 0, -1))) as fillet5_piece_1_section:
        with BuildLine():
            Bezier((1.79521773, 0), (-0.103639657, 0.102712225), (-1.454327272, 1.441313042), weights=[1, 0.23367054, 1])
            Line((-1.454327272, 1.441313042), (0, 0))
            ThreePointArc((0, 0), (0.897608865, 0.024258816), (1.79521773, 0))
        make_face()
    fillet5_piece_1 = extrude(amount=123.418868953, mode=Mode.PRIVATE)
    fillet5_piece_1 = split(fillet5_piece_1, bisect_by=Plane(origin=(-219.113727591, 3.222415949, 5.85), z_dir=(-3.452476154533893e-07, 0, 0.9999999999999404)), keep=Keep.TOP, mode=Mode.PRIVATE)
    add(fillet5_piece_1, mode=Mode.SUBTRACT)
    with BuildSketch(Plane(origin=(-195.097348746, -25.328490267, 124.15), x_dir=(-1, 0, 0), z_dir=(0, 0, -1))) as fillet5_piece_2_section:
        with BuildLine():
            Bezier((FILLET5_SIZE, 0), (0, 0), (0, -FILLET5_SIZE), weights=[1, 0.176776695, 1])
            Line((0, -FILLET5_SIZE), (0, 0))
            Line((0, 0), (FILLET5_SIZE, 0))
        make_face()
    fillet5_piece_2 = extrude(amount=130.799991708, mode=Mode.PRIVATE)
    fillet5_piece_2 = split(fillet5_piece_2, bisect_by=Plane(origin=(-195.097307903, -25.328490267, 5.850008292), z_dir=(-3.452476154533893e-07, 0, 0.9999999999999404)), keep=Keep.TOP, mode=Mode.PRIVATE)
    add(fillet5_piece_2, mode=Mode.SUBTRACT)
    with BuildSketch(Plane(origin=(-219.113768434, 15.471509733, -20.605653446), x_dir=(0, -1, 0), z_dir=(0, 0, 1))) as fillet5_piece_3_section:
        with BuildLine():
            Bezier((9.588913957, 0), (-2.904204754, 0), (6.139263069, -8.619379609), weights=[1, 0.092891751, 1])
            ThreePointArc((6.139263069, -8.619379609), (2.657898383, -4.602951994), (0, 0))
            Line((0, 0), (9.588913957, 0))
        make_face()
    fillet5_piece_3 = extrude(amount=144.755653446, mode=Mode.PRIVATE)
    fillet5_piece_3 = split(fillet5_piece_3, bisect_by=Plane(origin=(-219.113777568, 15.471509733, 5.85), z_dir=(-3.452476154533893e-07, 0, 0.9999999999999404)), keep=Keep.TOP, mode=Mode.PRIVATE)
    add(fillet5_piece_3, mode=Mode.SUBTRACT)


solid = part.part
